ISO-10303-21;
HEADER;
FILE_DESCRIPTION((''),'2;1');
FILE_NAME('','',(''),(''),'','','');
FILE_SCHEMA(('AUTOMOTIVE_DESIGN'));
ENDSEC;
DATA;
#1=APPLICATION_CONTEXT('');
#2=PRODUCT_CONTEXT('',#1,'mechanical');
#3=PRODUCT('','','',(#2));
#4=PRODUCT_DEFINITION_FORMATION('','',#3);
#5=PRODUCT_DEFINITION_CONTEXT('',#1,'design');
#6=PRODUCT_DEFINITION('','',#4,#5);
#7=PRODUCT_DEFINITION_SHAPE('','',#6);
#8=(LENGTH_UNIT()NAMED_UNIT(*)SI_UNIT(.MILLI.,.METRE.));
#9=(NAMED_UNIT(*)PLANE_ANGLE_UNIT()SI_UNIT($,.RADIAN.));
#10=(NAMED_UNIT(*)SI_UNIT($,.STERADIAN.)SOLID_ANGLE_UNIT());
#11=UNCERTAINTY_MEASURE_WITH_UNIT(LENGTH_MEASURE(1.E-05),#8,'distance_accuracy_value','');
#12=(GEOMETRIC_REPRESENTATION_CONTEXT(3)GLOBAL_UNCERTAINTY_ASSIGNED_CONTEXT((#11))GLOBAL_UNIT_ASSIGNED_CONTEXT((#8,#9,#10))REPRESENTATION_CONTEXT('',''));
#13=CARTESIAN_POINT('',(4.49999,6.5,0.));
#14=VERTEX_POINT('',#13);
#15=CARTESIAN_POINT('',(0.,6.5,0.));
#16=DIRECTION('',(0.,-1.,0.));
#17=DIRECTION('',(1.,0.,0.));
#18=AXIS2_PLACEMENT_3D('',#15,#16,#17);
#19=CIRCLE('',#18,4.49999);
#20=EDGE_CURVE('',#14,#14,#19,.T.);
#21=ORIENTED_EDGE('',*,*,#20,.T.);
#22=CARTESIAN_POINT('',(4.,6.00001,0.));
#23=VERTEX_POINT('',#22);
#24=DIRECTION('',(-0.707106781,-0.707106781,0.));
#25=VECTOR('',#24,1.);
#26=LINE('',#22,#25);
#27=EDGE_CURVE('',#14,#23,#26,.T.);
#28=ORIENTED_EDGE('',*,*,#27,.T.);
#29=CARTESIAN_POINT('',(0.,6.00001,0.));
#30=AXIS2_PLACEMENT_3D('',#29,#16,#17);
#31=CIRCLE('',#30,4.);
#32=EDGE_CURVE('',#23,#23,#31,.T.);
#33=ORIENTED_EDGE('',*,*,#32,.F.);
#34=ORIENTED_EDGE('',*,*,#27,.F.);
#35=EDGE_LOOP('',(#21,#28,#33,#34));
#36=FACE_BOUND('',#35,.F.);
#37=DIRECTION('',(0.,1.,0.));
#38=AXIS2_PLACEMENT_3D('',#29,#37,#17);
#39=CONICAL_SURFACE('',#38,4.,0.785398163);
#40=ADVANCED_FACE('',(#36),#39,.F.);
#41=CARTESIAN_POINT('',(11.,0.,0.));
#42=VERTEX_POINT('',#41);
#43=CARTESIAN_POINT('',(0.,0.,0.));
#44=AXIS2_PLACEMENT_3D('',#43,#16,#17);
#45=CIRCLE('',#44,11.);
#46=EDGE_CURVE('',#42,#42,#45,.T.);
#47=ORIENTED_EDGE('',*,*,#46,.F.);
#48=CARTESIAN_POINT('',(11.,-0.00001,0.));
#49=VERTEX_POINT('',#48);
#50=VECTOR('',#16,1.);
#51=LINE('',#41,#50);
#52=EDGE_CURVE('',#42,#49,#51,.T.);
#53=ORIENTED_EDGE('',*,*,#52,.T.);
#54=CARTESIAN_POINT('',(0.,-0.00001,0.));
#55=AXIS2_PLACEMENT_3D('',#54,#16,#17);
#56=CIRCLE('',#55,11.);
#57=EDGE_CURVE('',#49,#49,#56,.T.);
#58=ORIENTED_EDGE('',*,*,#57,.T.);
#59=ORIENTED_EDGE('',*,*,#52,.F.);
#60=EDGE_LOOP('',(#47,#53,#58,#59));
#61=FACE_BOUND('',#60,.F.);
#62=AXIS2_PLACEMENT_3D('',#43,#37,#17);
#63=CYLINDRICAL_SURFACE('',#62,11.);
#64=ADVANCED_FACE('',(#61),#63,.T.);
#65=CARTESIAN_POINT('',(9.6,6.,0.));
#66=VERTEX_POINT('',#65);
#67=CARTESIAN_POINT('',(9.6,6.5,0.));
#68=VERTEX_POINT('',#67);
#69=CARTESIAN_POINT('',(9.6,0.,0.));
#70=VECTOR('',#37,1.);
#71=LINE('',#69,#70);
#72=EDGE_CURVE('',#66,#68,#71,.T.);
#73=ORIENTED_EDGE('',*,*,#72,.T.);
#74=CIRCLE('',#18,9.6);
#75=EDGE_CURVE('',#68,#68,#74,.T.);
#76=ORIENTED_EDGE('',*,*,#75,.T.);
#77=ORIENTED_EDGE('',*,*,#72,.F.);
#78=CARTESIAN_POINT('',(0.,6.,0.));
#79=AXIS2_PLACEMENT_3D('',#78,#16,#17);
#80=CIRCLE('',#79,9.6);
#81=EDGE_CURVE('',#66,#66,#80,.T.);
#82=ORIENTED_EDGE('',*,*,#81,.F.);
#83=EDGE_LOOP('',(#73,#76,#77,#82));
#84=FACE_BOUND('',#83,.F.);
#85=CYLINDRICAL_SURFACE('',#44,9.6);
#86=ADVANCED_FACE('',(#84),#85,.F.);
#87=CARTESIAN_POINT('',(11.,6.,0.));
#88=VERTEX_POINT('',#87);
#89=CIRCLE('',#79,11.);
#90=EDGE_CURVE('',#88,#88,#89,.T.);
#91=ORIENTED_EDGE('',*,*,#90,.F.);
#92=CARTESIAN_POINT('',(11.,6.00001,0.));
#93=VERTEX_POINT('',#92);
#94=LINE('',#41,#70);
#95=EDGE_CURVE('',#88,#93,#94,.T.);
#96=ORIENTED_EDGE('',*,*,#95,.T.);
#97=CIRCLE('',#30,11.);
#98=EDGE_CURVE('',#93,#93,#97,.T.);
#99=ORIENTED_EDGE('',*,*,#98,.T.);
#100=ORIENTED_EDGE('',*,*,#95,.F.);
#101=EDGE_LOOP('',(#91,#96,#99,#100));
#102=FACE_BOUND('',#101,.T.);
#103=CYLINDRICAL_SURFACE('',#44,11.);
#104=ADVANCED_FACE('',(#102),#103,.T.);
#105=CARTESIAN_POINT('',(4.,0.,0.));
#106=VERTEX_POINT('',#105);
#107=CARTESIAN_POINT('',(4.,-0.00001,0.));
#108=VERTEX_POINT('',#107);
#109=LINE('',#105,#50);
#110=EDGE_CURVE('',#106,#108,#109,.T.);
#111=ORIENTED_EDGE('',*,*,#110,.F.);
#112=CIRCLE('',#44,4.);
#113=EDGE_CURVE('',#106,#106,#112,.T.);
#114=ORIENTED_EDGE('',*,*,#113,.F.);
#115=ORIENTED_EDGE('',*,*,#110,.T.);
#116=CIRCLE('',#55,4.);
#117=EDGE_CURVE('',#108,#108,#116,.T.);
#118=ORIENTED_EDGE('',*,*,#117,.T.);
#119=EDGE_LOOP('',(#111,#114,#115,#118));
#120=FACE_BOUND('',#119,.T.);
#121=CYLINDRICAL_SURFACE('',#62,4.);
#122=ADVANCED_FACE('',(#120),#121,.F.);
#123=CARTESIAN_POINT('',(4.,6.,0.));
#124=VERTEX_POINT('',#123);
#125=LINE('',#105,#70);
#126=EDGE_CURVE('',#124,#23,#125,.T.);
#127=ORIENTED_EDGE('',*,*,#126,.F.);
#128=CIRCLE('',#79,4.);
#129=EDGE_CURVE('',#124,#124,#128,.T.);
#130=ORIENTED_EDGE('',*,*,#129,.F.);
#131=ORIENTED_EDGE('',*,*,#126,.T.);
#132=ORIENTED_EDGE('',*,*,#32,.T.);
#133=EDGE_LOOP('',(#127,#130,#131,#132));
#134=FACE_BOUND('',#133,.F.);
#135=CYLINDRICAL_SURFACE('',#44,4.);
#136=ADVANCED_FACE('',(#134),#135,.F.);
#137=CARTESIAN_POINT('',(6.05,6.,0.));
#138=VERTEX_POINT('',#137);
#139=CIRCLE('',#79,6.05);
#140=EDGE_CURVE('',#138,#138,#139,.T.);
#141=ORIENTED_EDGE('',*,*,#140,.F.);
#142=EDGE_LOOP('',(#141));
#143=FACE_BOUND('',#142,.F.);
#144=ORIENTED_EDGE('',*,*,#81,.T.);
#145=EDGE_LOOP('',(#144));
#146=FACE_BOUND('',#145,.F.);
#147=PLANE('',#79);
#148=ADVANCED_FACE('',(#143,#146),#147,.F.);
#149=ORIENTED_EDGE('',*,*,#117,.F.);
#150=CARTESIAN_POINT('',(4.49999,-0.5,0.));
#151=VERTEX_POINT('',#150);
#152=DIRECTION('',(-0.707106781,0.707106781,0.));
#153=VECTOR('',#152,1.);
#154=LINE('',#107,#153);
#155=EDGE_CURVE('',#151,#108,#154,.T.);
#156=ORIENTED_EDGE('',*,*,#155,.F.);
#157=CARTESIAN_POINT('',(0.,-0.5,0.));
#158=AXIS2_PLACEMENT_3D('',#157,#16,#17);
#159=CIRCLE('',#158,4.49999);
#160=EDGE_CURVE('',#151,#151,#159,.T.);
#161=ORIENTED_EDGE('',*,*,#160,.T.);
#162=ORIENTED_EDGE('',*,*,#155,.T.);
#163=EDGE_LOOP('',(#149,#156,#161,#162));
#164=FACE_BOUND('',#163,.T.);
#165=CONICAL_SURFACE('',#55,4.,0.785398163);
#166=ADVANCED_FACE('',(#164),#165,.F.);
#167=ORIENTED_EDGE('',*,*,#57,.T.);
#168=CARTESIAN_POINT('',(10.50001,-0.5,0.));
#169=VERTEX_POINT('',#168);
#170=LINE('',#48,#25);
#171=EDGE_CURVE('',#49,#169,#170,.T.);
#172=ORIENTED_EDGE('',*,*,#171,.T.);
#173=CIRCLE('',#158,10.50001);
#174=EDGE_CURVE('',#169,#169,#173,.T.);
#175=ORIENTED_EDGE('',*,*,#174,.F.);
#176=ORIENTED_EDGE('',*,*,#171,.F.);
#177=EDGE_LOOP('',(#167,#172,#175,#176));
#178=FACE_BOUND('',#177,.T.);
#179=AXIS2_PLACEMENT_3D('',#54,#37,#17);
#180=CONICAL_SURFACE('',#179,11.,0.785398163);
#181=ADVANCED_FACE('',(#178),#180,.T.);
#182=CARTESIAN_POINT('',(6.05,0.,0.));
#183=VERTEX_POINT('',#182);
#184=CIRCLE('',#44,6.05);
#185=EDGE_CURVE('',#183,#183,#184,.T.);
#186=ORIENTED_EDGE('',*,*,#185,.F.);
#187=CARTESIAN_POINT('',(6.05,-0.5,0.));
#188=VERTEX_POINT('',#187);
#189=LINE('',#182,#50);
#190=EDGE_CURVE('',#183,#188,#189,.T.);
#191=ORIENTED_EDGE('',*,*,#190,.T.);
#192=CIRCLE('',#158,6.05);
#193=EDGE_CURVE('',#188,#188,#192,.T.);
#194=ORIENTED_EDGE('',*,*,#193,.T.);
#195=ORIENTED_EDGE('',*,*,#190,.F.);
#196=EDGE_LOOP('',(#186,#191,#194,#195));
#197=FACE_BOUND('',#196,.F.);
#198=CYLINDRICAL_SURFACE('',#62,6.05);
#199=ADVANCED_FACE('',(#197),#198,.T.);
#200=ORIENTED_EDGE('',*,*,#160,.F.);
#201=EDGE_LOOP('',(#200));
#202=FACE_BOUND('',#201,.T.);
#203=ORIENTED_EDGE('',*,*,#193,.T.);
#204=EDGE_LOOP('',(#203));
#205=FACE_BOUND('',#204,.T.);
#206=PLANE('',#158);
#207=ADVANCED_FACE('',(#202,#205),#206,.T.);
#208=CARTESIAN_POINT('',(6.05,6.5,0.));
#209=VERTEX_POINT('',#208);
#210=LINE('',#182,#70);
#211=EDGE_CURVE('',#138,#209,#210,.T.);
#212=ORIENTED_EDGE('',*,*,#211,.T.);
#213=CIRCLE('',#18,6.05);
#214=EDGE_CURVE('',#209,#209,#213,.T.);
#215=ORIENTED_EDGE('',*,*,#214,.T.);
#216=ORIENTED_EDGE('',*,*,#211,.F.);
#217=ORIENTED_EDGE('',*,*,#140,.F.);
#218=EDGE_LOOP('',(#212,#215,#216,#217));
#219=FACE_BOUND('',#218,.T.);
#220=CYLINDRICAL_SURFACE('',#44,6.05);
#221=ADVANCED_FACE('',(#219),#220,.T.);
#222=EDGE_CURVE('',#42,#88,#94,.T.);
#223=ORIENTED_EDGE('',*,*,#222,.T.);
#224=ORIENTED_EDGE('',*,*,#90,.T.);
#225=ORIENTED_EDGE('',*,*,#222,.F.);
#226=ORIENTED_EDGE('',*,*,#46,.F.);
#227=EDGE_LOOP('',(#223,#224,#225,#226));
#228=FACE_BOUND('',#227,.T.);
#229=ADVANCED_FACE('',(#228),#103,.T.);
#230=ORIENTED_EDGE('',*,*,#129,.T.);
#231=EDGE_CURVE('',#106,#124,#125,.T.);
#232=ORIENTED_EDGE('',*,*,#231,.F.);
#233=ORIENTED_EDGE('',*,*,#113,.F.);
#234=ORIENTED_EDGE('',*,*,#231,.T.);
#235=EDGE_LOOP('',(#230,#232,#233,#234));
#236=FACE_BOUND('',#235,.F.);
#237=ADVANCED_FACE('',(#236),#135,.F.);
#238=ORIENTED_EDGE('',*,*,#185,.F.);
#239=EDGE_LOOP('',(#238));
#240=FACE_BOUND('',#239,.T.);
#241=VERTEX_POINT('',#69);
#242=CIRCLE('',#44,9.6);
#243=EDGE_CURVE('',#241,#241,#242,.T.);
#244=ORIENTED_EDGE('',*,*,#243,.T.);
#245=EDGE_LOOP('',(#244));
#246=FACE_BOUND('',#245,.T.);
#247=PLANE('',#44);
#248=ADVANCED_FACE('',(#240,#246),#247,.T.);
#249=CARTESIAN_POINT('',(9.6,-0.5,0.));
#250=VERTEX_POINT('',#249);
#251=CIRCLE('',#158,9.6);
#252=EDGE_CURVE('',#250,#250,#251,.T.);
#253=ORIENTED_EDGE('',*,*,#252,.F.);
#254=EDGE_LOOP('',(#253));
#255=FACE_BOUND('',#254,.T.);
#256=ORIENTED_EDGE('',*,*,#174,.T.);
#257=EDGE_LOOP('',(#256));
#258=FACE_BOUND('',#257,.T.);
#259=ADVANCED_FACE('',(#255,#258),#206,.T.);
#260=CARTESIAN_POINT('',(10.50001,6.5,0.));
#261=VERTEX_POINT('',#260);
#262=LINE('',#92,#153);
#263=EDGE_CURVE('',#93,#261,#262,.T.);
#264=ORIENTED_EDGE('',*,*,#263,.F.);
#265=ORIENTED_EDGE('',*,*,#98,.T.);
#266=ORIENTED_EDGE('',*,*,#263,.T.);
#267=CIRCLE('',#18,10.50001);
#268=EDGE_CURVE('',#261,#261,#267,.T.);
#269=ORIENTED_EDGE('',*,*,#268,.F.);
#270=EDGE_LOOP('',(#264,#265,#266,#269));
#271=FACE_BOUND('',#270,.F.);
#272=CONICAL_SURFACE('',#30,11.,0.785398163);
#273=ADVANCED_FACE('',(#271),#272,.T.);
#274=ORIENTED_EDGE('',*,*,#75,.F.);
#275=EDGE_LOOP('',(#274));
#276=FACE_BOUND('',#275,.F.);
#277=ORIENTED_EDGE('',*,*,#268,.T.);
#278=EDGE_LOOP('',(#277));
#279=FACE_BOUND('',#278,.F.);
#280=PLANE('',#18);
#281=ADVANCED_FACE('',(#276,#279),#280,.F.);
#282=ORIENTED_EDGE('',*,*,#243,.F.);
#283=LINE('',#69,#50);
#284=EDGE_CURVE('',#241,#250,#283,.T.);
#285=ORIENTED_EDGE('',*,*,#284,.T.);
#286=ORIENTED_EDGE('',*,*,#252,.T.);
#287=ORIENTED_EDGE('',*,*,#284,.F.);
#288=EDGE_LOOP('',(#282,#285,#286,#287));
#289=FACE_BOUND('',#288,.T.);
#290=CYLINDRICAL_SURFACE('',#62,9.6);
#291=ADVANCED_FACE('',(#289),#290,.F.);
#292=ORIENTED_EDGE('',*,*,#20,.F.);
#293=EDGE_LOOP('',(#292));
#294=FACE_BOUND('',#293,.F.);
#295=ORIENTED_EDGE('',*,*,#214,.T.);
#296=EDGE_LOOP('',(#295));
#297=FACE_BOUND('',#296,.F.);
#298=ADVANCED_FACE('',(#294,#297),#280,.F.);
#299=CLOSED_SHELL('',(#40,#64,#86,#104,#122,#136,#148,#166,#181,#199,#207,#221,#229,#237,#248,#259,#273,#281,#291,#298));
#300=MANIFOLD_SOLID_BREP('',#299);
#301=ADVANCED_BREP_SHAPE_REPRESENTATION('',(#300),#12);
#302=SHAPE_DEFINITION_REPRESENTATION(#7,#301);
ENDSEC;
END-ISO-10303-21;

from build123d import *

# Parameters (mm, degrees)
F0_R          = 11
F0_R_2        = 4
F1_DEPTH      = 6
F2_R          = 11
F2_R_2        = 9.6
F2_R_3        = 6.05
F2_R_4        = 4
F3_DEPTH      = 0.5
F3_DEPTH_BACK = 6.5
F4_SIZE       = 0.49999


# Not quite as in the source:
# - a fillet or chamfer is up to 0.001 mm smaller than in the source, because OpenCascade refuses the exact size


with BuildPart() as f1:
    # F0 (on Front) → F1 (new body)
    with BuildSketch(Plane.XZ):
        Circle(F0_R)
        Circle(F0_R_2, mode=Mode.SUBTRACT)
    extrude(amount=-F1_DEPTH)

    # F2 (on face) → F3 (join, two sides)
    with BuildSketch(Plane.XZ) as f3_sk:
        Circle(F2_R)
        Circle(F2_R_2, mode=Mode.SUBTRACT)
        Circle(F2_R_3)
        Circle(F2_R_4, mode=Mode.SUBTRACT)
    extrude(amount=F3_DEPTH)
    extrude(f3_sk.sketch, amount=-F3_DEPTH_BACK)

    # F4 (size 0.5 in the source; OpenCascade refuses exactly that, so slightly less here)
    f4_edges = [f1.edges().sort_by_distance(p)[0] for p in [
        (-11, -0.5, 0),
        (-4, -0.5, 0),
        (-11, 6.5, 0),
        (-4, 6.5, 0),
    ]]
    chamfer(f4_edges, length=F4_SIZE)


solid = f1.part
